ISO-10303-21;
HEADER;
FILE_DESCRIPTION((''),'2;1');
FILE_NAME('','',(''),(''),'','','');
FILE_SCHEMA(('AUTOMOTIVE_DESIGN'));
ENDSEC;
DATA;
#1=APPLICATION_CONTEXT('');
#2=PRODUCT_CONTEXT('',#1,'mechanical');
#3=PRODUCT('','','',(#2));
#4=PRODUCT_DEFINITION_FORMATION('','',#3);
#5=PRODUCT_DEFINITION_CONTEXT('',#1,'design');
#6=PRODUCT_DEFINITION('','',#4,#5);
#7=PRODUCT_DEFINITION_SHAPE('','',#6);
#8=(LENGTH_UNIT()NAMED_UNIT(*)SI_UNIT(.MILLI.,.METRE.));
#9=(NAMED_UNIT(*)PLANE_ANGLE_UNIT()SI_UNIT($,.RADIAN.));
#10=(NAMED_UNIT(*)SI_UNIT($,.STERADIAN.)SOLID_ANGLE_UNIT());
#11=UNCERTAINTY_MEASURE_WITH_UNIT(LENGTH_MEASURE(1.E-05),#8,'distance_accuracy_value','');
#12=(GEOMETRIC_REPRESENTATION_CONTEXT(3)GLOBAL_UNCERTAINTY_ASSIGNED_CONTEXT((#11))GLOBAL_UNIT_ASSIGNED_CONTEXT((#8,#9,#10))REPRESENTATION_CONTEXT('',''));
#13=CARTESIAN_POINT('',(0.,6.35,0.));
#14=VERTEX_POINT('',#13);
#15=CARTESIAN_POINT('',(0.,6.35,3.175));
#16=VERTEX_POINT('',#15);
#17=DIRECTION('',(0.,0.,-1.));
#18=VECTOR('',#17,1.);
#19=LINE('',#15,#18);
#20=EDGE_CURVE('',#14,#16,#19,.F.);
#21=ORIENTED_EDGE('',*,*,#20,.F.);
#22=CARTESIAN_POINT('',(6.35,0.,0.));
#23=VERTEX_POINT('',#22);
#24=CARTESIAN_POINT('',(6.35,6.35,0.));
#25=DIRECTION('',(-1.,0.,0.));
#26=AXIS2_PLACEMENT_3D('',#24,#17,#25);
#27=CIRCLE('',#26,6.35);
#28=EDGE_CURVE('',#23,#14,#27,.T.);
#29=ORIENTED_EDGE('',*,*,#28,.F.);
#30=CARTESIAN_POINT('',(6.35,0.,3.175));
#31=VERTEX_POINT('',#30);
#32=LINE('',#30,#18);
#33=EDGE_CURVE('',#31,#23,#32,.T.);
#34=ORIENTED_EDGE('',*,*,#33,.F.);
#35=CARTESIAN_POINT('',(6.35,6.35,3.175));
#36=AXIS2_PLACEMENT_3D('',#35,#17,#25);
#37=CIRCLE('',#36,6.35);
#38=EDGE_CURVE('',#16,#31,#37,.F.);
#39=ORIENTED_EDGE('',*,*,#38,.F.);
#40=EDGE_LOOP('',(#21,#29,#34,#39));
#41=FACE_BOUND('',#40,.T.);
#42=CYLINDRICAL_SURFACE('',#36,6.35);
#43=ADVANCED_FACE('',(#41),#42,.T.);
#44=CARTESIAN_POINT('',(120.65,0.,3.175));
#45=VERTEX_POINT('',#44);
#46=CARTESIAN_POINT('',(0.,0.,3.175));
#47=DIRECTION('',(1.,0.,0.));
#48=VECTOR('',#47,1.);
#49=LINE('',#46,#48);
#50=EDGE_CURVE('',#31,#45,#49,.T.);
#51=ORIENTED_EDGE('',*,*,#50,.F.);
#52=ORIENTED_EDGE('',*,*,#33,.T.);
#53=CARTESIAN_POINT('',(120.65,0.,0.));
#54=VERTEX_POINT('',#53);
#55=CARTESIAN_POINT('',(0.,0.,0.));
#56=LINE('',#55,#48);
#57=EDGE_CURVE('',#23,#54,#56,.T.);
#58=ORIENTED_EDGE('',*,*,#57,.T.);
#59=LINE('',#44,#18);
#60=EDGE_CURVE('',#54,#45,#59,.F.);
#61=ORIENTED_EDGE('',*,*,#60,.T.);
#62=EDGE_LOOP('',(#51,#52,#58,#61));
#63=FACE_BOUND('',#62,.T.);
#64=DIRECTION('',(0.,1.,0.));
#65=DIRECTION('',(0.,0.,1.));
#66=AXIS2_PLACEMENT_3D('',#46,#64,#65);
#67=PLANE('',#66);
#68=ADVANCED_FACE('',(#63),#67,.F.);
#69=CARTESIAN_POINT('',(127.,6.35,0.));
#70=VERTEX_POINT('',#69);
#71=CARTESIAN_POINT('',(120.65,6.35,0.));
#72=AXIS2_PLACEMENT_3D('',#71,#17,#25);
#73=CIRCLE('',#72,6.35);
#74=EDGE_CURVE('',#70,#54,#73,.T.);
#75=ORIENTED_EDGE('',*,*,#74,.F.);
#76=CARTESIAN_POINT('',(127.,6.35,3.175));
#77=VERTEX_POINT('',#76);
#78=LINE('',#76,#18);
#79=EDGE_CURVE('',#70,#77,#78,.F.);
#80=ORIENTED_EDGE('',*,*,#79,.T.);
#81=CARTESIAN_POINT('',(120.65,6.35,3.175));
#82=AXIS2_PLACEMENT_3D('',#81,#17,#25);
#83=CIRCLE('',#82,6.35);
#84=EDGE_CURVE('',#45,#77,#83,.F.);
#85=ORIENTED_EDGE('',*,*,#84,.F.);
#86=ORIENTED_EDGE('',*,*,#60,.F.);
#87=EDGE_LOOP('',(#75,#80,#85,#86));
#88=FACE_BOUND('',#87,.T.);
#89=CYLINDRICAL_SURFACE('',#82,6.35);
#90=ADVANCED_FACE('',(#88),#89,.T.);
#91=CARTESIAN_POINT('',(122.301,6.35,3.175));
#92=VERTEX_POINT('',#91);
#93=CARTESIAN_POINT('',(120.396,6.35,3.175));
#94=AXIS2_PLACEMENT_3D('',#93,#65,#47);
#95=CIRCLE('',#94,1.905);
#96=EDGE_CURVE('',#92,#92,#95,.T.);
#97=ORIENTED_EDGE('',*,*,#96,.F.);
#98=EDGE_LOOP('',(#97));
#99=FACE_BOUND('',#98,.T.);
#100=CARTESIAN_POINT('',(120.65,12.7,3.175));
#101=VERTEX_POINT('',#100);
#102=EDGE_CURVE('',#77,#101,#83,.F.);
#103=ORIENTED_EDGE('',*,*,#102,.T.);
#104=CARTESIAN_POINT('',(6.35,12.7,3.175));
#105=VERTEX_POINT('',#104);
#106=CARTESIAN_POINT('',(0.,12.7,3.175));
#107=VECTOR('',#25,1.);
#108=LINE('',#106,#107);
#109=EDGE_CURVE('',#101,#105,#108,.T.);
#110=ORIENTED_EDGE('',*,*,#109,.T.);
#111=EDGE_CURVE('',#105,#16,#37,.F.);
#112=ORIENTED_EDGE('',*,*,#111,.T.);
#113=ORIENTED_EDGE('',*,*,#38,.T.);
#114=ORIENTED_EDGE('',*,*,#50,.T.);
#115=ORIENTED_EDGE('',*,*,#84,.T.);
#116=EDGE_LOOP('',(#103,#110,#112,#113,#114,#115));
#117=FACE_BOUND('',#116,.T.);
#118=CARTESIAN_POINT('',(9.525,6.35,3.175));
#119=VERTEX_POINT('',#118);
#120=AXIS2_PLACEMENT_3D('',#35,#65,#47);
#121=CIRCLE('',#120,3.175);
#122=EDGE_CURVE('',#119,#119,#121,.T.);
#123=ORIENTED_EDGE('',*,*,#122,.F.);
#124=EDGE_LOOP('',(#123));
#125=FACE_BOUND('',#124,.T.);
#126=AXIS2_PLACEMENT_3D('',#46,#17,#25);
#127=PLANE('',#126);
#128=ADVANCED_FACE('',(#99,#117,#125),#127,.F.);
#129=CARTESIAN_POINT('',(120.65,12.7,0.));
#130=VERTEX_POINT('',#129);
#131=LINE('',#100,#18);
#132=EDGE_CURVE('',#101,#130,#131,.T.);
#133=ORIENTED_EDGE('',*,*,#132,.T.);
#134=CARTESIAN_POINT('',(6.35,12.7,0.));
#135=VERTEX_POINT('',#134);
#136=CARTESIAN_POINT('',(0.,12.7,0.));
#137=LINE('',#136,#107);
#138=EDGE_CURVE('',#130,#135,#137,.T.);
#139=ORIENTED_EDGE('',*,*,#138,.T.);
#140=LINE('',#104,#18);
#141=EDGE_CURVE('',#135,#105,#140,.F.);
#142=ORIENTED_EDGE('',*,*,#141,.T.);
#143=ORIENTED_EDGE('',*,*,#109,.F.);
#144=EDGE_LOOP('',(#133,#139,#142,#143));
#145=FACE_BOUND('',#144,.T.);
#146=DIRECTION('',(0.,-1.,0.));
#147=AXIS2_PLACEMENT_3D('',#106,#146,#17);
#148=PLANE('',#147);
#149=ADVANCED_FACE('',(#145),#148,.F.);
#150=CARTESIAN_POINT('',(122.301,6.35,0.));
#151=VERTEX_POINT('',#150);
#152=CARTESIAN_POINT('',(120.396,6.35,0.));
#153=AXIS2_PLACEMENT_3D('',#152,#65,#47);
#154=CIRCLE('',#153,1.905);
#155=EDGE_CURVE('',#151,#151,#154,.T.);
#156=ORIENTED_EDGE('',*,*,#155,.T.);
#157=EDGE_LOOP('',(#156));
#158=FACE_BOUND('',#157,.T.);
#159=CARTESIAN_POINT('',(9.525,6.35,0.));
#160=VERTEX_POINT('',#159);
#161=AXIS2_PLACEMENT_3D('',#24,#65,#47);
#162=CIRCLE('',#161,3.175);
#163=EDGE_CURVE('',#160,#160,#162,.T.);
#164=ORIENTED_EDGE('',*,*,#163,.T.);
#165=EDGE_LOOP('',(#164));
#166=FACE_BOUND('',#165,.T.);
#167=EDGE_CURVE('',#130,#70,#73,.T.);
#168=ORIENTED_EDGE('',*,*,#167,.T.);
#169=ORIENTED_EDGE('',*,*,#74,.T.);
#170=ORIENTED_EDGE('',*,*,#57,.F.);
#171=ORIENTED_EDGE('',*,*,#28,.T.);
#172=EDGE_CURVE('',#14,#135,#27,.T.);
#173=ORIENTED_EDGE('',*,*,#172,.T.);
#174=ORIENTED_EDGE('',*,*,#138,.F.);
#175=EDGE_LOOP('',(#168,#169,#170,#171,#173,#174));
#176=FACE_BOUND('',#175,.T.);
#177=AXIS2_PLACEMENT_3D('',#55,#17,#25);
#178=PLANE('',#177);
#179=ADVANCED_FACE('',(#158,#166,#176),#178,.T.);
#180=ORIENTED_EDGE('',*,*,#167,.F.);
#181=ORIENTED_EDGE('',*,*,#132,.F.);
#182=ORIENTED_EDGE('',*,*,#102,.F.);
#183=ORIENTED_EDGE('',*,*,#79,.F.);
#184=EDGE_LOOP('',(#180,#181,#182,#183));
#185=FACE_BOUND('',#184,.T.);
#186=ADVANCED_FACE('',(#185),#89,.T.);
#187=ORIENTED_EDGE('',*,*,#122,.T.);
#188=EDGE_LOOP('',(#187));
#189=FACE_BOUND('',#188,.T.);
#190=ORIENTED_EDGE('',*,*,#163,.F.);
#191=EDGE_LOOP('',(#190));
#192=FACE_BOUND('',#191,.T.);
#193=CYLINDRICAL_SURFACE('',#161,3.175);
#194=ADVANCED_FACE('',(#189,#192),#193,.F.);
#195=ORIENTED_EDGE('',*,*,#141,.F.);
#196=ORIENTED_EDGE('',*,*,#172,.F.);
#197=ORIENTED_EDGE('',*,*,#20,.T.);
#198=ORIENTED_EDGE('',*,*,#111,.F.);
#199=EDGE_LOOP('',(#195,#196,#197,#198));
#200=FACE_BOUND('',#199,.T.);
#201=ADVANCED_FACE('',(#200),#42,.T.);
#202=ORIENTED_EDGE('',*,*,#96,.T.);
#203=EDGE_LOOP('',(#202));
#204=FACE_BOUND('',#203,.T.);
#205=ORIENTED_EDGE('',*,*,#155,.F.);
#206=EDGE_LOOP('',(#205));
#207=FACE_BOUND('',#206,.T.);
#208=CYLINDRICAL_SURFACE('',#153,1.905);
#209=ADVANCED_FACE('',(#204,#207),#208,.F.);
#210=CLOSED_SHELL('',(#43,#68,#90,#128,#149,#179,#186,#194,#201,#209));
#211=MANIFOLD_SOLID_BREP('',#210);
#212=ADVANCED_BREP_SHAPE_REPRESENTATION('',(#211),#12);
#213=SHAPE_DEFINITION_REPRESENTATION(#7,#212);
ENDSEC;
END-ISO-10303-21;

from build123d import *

# Parameters (mm, degrees)
SKETCH1_W           = 127
SKETCH1_H           = 12.7
BOSS_EXTRUDE1_DEPTH = 3.175
FILLET1_R           = 6.35
SKETCH2_R           = 3.175
SKETCH2_R_2         = 1.905
CUT_EXTRUDE1_DEPTH  = 3.175
FILLET2_R           = 6.35


with BuildPart() as part:
    # Sketch1 → Boss-Extrude1 (new body)
    with BuildSketch(Plane.XY):
        with Locations((63.5, 6.35)):
            Rectangle(SKETCH1_W, SKETCH1_H)
    extrude(amount=BOSS_EXTRUDE1_DEPTH)

    # Fillet1
    fillet1_edges = [part.edges().sort_by_distance(p)[0] for p in [
        (0, 0, 1.5875),
        (0, 12.7, 1.5875),
    ]]
    fillet(fillet1_edges, radius=FILLET1_R - 0.0001)  # a hair under: the kernel refuses the full size

    # Sketch2 → Cut-Extrude1 (cut)
    with BuildSketch(Plane.XY.offset(3.175)):
        with Locations((6.35, 6.35)):
            Circle(SKETCH2_R)
        with Locations((120.396, 6.35)):
            Circle(SKETCH2_R_2)
    extrude(amount=-CUT_EXTRUDE1_DEPTH, mode=Mode.SUBTRACT)

    # Fillet2
    fillet2_edges = [part.edges().sort_by_distance(p)[0] for p in [
        (127, 0, 1.5875),
        (127, 12.7, 1.5875),
    ]]
    fillet(fillet2_edges, radius=FILLET2_R - 0.0001)  # a hair under: the kernel refuses the full size


solid = part.part
